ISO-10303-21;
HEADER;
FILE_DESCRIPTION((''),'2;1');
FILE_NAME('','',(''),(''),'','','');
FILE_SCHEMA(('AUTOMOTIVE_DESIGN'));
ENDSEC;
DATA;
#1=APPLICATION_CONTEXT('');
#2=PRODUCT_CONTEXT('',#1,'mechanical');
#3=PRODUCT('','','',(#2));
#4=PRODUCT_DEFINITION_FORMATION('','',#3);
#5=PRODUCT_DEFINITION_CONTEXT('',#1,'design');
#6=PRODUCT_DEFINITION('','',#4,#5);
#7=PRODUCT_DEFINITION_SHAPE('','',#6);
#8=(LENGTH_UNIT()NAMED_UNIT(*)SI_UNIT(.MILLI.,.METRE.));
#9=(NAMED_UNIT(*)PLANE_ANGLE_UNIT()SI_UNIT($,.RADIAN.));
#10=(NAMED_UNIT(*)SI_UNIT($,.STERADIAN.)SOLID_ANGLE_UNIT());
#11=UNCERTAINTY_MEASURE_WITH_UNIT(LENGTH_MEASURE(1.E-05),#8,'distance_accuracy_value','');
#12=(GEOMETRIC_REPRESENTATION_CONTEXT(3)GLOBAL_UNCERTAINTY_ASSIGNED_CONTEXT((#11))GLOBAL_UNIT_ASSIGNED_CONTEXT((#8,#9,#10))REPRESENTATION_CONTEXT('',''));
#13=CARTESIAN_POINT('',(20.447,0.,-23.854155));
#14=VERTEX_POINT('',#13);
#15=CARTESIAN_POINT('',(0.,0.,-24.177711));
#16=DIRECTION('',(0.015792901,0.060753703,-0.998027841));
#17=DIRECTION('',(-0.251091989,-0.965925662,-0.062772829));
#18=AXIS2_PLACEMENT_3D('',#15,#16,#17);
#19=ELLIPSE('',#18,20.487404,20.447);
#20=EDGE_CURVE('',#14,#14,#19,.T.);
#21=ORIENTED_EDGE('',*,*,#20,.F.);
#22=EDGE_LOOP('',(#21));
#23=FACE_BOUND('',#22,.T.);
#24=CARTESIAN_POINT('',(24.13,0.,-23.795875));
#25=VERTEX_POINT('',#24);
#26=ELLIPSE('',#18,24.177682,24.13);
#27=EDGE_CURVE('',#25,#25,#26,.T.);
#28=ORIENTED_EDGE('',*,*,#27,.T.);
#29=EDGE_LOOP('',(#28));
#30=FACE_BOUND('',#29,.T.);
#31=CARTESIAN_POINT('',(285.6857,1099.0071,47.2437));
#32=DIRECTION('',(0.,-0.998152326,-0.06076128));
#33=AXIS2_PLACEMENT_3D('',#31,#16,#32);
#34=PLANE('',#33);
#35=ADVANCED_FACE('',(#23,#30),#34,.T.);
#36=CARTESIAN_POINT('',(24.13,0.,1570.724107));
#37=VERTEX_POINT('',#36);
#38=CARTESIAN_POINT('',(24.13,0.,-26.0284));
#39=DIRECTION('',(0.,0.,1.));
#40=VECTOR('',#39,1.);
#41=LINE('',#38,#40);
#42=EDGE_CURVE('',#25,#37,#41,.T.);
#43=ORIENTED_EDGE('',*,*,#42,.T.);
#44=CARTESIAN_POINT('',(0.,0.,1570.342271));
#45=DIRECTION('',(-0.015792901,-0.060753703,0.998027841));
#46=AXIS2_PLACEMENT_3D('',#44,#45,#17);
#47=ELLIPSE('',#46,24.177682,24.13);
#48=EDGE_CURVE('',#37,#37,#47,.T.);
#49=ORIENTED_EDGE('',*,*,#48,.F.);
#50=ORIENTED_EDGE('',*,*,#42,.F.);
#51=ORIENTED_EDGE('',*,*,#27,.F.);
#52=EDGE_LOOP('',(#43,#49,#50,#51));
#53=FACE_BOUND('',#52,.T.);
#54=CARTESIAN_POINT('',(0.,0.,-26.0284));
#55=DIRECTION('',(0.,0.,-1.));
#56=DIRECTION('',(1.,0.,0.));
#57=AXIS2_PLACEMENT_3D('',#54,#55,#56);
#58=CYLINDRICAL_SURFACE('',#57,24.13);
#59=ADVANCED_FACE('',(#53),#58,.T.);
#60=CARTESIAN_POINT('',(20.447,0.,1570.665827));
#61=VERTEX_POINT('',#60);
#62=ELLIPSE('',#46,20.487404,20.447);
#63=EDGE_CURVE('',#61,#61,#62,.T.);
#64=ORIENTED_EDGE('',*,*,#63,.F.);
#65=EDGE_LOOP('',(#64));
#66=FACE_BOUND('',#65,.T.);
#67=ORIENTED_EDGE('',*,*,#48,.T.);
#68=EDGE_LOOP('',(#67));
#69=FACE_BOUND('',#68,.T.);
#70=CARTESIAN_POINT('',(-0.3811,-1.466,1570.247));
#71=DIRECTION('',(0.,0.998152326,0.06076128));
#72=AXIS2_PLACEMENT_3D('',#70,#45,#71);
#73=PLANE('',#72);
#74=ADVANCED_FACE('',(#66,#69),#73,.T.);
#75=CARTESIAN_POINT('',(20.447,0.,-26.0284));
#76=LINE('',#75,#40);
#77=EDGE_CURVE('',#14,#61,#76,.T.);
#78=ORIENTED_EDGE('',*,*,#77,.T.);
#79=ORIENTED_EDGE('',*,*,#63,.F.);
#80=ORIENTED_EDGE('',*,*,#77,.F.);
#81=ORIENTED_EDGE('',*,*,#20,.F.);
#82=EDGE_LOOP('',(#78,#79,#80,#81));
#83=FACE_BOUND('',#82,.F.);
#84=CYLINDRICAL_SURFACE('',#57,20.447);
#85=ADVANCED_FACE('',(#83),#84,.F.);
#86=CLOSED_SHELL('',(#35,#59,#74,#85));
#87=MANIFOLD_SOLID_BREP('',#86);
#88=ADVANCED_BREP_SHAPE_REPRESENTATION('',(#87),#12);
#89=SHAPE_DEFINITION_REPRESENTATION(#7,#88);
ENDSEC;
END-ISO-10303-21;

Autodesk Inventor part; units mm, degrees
ref_plane "Start Plane" through (0, 0, -26.0284) normal (0, 0, 1) x (1, 0, 0)
ref_plane "End Plane" through (0, 0, 1572.193) normal (0, 0, 1) x (1, 0, 0)
sketch "Sketch" plane through (0, 0, 0) normal (0, 0, 1) x (1, 0, 0)
  circle A0 centre (0, 0) radius 20.447
  circle A1 centre (0, 0) radius 24.13
  dimension "d0" = 48.26
  dimension "d1" = 3.683
extrude "Body" add sketch "Sketch" along normal up to surface (1598.2214 mm away) from surface at -26.0284
sketch "Sketch3" plane through (0, 0, 0) normal (0, 0, 1) x (1, 0, 0)
  line L0 (0, 0) -> (10, 0)
ref_plane "Work Plane3" through (0, 0, 0) normal (0, -1, 0) x (1, 0, 0)
ref_plane "Work Plane4" through (285.6857, 1099.0071, 47.2437) normal (0.0157929, 0.0607537, -0.9980278) x (0.8735323, -0.48651, -0.0157929)
split "Split1" plane through (285.6857, 1099.0071, 47.2437) removes the side toward (0.0157929, 0.0607537, -0.9980278)
ref_plane "Work Plane5" through (-0.3811, -1.466, 1570.247) normal (-0.0157929, -0.0607537, 0.9980278) x (0.9998752, -0.0004802, 0.0157929)
split "Split2" plane through (-0.3811, -1.466, 1570.247) removes the side toward (-0.0157929, -0.0607537, 0.9980278)
sketch "Sketch4" plane through (0, 0, 0) normal (0, -1, 0) x (1, 0, 0)
  line L0 (-2, -26.0284) -> (12, -26.0284) projected
  line L1 (-2, 1572.193) -> (12, 1572.193) projected
  dimension "d7" = 1598.2214
equation "\"d0\" = G_H"
equation "\"d1\" = G_T"
equation "\"d2\" = G_L"
equation "\"G_H\" = 48.26"
equation "\"G_T\" = 3.683"
equation "\"G_L\" = d7"
equation "\"G_OFFSET_START\" = 26.0284"
equation "\"G_OFFSET_END\" = 26.0284"
equation "\"d4\" = -G_OFFSET_START"
equation "\"d5\" = G_OFFSET_END + B_L"
equation "\"B_L\" = 1546.16461"
properties part number "ANSI - 1 1/2 x 0.145 - 62.922" material "Steel, Mild"
